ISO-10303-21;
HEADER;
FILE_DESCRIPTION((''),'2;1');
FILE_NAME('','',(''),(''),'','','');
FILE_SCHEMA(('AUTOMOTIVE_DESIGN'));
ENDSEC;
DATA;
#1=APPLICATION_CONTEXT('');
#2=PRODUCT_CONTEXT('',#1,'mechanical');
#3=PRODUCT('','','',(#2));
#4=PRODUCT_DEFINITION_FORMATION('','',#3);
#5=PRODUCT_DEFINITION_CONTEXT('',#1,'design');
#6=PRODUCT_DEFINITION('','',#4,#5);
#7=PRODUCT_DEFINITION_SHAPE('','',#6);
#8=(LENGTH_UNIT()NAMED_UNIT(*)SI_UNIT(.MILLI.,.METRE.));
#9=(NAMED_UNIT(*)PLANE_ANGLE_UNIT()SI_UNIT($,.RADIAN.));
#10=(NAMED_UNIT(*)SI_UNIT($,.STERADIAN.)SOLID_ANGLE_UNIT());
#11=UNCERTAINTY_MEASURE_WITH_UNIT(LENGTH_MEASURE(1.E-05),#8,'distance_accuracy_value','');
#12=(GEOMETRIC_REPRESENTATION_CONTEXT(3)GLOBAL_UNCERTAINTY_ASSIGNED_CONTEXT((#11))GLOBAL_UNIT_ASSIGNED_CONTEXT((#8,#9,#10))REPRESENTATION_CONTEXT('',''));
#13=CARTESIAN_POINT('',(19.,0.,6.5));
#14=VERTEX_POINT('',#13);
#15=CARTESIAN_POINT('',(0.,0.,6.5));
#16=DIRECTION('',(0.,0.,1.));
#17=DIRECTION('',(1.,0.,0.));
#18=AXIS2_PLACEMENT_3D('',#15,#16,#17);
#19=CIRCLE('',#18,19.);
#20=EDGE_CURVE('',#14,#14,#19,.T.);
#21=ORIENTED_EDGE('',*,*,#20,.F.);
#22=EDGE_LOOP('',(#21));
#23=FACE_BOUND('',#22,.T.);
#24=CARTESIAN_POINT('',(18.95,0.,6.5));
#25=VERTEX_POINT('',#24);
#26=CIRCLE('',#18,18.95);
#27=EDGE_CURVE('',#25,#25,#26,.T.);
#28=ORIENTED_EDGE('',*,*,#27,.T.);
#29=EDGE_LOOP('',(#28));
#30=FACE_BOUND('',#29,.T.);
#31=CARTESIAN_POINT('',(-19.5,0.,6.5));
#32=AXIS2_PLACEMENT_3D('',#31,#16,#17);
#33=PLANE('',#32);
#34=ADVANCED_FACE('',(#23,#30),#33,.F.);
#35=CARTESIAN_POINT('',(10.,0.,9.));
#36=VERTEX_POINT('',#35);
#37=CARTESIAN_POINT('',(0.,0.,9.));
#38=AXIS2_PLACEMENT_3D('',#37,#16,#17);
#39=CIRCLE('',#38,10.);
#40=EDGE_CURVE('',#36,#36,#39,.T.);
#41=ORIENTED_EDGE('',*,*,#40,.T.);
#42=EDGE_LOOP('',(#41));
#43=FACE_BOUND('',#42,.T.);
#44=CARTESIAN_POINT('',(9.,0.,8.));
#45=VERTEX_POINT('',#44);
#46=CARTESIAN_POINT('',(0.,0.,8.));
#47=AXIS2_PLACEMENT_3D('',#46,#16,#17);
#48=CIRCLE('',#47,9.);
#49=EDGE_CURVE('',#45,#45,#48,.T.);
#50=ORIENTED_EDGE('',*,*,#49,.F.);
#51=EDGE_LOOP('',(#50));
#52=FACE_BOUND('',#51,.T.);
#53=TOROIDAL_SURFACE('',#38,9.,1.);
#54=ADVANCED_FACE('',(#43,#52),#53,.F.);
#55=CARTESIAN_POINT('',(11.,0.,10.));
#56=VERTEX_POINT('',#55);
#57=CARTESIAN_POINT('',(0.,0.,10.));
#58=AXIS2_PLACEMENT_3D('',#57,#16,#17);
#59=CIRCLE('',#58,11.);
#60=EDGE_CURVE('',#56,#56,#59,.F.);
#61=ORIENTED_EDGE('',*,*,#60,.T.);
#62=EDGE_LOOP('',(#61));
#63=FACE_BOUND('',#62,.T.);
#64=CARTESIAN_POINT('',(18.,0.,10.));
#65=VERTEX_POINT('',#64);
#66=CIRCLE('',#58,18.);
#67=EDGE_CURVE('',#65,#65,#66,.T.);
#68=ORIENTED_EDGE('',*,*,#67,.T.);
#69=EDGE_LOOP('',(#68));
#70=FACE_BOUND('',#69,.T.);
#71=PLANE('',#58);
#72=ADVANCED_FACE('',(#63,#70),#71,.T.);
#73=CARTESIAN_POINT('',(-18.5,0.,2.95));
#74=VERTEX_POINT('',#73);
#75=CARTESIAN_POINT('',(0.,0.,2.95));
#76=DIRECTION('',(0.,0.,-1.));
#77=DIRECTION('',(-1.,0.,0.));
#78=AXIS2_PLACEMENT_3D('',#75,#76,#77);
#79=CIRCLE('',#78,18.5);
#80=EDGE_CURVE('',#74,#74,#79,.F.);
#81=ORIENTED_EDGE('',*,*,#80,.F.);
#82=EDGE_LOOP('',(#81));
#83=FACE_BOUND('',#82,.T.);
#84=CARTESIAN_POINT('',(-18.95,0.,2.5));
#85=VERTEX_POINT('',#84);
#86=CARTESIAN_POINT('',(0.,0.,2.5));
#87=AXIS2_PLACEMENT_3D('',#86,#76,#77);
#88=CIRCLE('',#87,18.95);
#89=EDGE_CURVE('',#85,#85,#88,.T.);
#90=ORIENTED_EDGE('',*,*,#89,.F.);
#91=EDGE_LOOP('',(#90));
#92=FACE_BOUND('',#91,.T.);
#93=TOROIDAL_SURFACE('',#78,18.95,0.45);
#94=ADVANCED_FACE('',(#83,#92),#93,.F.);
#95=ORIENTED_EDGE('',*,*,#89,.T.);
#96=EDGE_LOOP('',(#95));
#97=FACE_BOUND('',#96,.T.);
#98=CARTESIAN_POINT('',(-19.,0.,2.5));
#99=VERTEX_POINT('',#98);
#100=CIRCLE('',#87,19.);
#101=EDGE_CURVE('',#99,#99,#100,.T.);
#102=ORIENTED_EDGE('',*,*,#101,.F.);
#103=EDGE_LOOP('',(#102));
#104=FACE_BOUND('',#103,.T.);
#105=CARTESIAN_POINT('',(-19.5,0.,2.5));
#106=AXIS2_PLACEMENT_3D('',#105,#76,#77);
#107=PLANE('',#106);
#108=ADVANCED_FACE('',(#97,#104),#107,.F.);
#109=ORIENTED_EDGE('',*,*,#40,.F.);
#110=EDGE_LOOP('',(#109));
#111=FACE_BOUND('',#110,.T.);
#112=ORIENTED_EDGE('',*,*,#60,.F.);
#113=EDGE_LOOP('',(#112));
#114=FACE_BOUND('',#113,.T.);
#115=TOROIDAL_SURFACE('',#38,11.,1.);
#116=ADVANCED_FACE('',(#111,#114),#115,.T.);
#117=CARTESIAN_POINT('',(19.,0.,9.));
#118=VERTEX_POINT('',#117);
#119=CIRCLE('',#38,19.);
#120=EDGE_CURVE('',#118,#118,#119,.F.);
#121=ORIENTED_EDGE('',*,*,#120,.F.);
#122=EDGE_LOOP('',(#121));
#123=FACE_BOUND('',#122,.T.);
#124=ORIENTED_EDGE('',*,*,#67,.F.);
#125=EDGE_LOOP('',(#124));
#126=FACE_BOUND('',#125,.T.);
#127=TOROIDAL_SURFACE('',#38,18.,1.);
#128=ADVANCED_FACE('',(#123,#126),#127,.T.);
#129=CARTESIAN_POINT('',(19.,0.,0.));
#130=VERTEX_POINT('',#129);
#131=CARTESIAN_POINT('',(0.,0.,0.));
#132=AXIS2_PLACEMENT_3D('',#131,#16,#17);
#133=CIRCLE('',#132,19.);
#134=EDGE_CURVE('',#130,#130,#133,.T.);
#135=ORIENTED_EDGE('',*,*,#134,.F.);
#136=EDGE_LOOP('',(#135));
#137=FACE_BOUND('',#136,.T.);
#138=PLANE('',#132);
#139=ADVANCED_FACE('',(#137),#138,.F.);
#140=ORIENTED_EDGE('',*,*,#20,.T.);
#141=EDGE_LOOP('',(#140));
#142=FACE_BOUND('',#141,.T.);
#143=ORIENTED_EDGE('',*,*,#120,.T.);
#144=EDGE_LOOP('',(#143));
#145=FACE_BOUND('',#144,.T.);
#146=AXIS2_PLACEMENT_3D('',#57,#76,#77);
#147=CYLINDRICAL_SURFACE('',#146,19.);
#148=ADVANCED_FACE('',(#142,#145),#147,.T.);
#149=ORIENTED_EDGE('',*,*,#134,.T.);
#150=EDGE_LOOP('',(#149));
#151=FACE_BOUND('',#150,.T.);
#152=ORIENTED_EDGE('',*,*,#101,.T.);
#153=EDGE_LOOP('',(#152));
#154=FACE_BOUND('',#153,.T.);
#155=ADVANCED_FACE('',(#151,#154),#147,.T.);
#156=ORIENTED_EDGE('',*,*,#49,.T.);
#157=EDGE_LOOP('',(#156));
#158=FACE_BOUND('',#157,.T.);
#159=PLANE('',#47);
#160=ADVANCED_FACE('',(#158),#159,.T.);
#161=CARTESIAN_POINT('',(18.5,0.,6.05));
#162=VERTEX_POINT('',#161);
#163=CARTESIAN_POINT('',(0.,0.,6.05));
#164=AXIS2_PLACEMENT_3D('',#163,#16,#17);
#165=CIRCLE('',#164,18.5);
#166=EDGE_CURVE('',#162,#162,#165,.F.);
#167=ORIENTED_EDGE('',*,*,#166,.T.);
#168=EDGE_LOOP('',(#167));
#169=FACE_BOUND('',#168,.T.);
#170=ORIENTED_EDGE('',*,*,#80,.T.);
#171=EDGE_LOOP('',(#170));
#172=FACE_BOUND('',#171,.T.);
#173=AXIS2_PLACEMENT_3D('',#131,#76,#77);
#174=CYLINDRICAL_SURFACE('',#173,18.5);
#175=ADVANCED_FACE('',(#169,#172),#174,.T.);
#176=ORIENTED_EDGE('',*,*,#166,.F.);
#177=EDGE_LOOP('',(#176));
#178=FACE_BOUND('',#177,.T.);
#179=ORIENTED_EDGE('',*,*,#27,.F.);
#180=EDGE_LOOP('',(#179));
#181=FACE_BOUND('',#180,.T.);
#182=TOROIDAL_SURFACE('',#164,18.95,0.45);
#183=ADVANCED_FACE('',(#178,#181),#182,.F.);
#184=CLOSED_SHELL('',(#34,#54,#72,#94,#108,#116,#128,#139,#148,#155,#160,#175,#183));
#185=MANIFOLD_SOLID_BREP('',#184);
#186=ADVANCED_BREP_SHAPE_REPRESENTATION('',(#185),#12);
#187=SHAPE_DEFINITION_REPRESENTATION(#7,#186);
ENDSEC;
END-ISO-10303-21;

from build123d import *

# Parameters (mm, degrees)
SKETCH1_R           = 19
BOSS_EXTRUDE1_DEPTH = 10
SKETCH2_R           = 10
CUT_EXTRUDE1_DEPTH  = 2
FILLET1_R           = 1
SKETCH3_W           = 1
SKETCH3_H           = 4
FILLET2_R           = 0.45


with BuildPart() as part:
    # Sketch1 → Boss-Extrude1 (new body)
    with BuildSketch(Plane.XY):
        Circle(SKETCH1_R)
    extrude(amount=BOSS_EXTRUDE1_DEPTH)

    # Sketch2 → Cut-Extrude1 (cut)
    with BuildSketch(Plane.XY.offset(10)):
        Circle(SKETCH2_R)
    extrude(amount=-CUT_EXTRUDE1_DEPTH, mode=Mode.SUBTRACT)

    # Fillet1
    fillet1_edges = [part.edges().sort_by_distance(p)[0] for p in [
        (-19, 0, 10),
        (-10, 0, 8),
        (-10, 0, 10),
    ]]
    fillet(fillet1_edges, radius=FILLET1_R - 0.0001)  # a hair under: the kernel refuses the full size

    # Sketch3 → Cut-Revolve1 (revolve, cut)
    with BuildSketch(Plane(origin=(0, 0, 0), x_dir=(1, 0, 0), z_dir=(0, 1, 0)), mode=Mode.PRIVATE) as cut_revolve1_sk:
        with Locations((-19, -4.5)):
            Rectangle(SKETCH3_W, SKETCH3_H)
    revolve(cut_revolve1_sk.sketch.rotate(Axis((0, 0, 0), (0, 0, 1)), 180), axis=Axis((0, 0, 0), (0, 0, 1)), mode=Mode.SUBTRACT)

    # Fillet2
    fillet2_edges = [part.edges().sort_by_distance(p)[0] for p in [
        (-18.5, 0, 6.5),
        (-18.5, 0, 2.5),
    ]]
    fillet(fillet2_edges, radius=FILLET2_R)


solid = part.part
